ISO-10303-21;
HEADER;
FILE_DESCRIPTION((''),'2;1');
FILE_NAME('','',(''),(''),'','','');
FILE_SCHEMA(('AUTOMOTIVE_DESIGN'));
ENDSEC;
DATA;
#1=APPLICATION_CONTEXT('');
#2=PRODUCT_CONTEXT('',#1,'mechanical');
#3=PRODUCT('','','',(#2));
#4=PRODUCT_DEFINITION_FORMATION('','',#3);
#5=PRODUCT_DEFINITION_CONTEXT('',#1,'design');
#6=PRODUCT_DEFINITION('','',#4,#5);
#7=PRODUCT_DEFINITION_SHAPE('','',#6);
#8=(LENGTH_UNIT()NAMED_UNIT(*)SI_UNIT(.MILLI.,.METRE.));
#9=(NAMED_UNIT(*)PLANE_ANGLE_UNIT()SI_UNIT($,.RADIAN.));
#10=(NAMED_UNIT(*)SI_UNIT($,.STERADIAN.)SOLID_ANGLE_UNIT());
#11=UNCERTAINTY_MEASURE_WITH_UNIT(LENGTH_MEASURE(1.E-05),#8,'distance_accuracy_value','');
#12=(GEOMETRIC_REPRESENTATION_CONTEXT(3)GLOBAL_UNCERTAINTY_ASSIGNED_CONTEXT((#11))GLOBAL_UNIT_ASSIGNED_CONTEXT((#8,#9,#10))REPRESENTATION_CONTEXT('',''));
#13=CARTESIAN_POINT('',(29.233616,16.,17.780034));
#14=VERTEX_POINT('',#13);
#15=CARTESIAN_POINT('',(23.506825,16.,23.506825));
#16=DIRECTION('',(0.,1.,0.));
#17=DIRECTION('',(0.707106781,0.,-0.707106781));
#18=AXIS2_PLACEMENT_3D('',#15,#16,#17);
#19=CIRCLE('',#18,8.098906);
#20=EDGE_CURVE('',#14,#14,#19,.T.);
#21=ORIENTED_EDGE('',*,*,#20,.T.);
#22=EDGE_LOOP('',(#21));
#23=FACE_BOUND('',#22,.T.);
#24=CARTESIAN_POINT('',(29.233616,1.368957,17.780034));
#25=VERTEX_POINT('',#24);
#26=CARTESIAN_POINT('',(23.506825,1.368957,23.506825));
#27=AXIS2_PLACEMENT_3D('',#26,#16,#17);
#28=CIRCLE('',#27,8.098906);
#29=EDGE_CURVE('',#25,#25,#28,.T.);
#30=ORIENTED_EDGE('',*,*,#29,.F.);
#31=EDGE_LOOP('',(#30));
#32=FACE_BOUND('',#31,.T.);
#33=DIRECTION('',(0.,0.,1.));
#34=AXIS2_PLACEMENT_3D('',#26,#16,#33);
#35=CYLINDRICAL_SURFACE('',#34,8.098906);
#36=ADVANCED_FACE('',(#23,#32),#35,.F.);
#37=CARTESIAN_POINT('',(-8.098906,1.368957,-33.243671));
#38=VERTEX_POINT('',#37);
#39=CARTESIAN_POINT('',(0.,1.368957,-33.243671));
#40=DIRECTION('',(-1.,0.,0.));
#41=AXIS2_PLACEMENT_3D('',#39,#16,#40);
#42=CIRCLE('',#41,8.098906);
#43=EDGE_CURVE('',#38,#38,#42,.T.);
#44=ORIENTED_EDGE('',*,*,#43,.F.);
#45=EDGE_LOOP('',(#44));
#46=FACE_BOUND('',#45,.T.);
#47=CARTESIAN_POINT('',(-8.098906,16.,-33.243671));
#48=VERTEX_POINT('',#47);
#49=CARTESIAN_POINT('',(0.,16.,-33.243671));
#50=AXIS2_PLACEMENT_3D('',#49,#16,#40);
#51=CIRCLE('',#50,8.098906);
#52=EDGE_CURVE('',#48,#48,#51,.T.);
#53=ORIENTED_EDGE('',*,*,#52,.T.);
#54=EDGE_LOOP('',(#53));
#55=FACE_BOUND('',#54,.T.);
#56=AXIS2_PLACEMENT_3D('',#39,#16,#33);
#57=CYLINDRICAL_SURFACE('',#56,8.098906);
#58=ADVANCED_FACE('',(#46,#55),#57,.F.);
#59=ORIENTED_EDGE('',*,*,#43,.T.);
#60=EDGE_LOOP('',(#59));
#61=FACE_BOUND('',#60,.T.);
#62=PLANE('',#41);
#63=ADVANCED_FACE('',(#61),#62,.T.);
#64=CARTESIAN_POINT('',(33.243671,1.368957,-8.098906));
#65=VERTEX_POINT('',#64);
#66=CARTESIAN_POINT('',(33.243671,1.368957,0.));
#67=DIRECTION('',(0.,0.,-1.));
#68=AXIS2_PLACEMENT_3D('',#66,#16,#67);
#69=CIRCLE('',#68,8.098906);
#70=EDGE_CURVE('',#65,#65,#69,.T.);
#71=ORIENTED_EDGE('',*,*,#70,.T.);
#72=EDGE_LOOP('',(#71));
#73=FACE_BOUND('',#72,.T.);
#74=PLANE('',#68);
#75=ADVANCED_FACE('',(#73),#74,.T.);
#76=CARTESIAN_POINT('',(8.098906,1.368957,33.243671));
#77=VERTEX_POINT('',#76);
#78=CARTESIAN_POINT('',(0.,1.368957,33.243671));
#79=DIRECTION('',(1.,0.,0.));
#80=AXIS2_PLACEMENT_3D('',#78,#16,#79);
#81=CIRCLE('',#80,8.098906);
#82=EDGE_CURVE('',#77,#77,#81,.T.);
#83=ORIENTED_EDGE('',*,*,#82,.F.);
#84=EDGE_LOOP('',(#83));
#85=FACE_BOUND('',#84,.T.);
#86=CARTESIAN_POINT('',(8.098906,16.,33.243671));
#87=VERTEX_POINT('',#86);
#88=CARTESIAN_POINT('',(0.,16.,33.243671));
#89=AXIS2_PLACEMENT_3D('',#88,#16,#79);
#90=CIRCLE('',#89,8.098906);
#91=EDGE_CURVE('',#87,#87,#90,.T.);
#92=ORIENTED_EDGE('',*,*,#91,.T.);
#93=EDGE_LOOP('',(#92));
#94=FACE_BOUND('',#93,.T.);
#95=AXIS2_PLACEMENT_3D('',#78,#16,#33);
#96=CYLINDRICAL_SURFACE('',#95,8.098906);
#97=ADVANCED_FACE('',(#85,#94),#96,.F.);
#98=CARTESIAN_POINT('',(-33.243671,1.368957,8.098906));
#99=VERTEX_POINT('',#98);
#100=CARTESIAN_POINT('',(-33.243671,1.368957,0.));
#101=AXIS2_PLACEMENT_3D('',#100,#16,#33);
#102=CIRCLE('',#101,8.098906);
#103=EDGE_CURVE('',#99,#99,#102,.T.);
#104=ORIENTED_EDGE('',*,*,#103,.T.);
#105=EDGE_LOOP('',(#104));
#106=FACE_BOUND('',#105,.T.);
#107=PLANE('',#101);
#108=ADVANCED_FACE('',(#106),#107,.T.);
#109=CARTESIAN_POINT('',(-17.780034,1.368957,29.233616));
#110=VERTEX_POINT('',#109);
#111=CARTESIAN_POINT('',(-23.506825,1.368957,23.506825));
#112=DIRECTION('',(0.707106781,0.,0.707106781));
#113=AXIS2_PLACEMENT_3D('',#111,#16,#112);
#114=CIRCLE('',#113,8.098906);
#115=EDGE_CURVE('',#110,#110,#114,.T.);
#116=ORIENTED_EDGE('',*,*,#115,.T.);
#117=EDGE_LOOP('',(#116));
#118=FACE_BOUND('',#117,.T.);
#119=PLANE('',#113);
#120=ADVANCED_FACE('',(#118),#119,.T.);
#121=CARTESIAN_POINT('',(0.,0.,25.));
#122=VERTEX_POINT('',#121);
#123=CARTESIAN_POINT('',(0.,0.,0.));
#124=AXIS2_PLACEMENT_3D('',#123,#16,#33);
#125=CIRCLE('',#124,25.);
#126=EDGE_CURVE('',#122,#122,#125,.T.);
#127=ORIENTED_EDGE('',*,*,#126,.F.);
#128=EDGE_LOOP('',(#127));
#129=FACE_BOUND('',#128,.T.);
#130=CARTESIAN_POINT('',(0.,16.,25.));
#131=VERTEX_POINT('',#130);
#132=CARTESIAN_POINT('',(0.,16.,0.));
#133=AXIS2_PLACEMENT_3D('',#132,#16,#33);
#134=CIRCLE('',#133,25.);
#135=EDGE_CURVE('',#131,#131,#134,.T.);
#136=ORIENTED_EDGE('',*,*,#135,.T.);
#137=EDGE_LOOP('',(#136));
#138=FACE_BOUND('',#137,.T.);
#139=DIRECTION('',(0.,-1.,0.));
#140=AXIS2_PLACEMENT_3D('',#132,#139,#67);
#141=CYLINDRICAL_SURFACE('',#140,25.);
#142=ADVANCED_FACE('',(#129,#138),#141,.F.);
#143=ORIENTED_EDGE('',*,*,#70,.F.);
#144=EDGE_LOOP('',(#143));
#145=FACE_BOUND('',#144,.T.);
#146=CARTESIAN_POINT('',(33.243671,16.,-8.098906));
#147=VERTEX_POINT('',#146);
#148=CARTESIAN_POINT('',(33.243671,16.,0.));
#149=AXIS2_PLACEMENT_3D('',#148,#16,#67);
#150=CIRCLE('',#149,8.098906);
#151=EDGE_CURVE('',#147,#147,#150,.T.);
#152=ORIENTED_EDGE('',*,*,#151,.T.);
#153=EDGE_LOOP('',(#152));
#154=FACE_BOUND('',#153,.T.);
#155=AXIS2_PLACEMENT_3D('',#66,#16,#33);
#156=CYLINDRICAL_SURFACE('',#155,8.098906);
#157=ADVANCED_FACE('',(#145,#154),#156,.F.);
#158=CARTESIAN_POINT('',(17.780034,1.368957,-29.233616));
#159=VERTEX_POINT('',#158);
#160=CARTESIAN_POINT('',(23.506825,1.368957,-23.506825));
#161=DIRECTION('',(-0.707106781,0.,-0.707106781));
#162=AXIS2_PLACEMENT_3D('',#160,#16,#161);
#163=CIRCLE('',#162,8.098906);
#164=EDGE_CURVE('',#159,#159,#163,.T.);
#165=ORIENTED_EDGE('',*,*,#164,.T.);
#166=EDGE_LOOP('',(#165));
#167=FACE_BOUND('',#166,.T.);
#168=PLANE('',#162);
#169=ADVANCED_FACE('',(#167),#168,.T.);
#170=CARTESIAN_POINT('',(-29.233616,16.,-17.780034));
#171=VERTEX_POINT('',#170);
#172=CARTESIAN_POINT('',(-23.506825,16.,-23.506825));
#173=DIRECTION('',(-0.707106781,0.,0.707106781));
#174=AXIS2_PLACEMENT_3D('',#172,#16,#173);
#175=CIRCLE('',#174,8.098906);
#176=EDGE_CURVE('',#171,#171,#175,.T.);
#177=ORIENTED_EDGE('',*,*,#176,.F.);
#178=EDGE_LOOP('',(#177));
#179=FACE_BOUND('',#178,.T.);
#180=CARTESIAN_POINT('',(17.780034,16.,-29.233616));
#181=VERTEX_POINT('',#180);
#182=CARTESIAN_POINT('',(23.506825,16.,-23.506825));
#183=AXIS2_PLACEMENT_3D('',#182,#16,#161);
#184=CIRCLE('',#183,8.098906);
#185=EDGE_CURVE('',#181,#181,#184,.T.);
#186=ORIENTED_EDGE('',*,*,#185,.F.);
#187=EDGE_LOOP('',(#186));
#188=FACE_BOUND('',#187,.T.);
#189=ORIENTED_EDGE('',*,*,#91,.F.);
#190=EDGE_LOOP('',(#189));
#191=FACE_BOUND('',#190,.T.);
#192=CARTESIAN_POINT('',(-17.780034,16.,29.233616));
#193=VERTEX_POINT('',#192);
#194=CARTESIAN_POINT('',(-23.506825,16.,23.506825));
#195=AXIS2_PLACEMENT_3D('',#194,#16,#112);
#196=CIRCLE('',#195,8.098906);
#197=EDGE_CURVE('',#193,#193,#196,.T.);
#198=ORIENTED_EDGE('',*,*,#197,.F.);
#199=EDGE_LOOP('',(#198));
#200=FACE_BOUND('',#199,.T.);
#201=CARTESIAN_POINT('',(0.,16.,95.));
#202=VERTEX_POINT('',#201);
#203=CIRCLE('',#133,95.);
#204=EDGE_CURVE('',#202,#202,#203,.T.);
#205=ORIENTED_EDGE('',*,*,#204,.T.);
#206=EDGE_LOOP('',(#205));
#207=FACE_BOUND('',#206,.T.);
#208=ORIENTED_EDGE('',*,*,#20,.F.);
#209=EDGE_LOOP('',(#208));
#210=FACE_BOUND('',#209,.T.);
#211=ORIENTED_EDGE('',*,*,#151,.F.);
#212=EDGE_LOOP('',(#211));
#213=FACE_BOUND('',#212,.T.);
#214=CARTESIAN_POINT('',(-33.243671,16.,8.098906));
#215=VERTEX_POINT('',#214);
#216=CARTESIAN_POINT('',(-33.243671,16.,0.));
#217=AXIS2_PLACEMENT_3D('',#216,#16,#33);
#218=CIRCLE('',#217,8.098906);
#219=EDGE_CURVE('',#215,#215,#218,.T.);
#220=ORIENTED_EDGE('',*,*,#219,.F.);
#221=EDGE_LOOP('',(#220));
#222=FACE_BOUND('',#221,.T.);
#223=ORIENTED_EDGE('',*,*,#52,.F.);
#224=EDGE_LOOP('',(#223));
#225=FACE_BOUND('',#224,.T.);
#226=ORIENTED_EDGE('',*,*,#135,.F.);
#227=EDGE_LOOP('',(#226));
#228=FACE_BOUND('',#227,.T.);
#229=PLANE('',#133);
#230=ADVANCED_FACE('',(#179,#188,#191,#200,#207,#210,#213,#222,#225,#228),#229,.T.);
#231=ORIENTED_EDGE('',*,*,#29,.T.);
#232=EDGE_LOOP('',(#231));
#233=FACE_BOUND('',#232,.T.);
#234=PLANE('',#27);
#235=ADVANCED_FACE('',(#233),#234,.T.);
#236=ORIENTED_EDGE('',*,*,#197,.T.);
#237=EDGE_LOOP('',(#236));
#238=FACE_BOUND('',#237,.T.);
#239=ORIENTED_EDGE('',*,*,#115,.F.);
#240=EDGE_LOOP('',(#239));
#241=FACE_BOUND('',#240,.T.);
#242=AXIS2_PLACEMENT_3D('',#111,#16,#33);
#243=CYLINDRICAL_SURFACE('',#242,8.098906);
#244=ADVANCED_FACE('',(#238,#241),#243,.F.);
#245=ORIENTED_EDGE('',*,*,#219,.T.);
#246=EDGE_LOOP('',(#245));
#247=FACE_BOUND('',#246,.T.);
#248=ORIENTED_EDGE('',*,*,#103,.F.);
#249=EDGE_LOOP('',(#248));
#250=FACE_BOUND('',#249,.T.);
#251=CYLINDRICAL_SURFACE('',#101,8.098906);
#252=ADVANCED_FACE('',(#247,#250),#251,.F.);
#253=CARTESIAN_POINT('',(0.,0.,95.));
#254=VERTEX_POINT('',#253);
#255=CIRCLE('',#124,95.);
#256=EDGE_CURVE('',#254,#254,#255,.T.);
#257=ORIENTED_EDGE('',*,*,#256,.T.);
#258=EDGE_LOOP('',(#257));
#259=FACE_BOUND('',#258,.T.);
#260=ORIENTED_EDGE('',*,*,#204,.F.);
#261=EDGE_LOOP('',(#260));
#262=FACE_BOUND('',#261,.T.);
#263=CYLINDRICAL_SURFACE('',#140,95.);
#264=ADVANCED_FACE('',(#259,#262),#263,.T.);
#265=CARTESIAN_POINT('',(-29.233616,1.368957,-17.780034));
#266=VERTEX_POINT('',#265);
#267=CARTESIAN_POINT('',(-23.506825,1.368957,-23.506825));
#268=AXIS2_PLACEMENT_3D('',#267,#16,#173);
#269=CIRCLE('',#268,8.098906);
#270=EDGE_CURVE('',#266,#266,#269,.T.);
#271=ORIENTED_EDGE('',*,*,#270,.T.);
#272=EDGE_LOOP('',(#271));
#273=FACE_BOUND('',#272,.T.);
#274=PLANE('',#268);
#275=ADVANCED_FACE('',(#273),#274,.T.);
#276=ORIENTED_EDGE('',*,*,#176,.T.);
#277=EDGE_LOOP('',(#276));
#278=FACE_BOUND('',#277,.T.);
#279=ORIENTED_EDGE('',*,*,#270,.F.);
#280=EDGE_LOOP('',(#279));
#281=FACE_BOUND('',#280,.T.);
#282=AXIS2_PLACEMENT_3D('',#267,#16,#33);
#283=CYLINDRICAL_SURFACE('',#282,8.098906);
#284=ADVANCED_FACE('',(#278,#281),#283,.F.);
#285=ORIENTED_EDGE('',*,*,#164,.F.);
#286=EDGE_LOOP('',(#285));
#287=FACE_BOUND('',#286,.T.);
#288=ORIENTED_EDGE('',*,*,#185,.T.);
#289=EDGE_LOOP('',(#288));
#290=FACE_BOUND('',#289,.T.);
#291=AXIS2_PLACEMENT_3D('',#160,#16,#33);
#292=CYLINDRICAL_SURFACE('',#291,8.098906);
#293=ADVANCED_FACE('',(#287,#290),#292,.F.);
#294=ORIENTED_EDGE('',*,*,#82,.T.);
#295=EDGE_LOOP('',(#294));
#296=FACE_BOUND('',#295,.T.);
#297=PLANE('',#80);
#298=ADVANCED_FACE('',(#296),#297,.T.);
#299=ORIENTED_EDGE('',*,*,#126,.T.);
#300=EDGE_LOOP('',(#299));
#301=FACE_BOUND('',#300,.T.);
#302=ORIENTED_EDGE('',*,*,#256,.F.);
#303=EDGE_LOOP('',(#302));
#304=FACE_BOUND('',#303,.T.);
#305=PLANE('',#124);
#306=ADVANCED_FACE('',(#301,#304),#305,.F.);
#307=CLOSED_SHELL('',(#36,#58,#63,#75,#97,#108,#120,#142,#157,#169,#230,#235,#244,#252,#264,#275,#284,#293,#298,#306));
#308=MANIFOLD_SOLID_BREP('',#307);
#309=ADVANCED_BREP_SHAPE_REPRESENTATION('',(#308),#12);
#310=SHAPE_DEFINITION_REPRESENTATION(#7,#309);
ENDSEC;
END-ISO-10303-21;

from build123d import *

# Parameters (mm, degrees)
SKETCH1_R           = 95
BOSS_EXTRUDE1_DEPTH = 16
SKETCH2_R           = 25
CUT_EXTRUDE1_DEPTH  = 136.299667405
SKETCH3_R           = 8.098905889
CUT_EXTRUDE2_DEPTH  = 14.63104318
CIRPATTERN1_COUNT   = 8


with BuildPart() as part:
    # Sketch1 → Boss-Extrude1 (new body)
    with BuildSketch(Plane(origin=(0, 0, 0), x_dir=(1, 0, 0), z_dir=(0, 1, 0))):
        Circle(SKETCH1_R)
    extrude(amount=BOSS_EXTRUDE1_DEPTH)

    # Sketch2 → Cut-Extrude1 (cut, through all)
    with BuildSketch(Plane(origin=(0, 0, 0), x_dir=(1, 0, 0), z_dir=(0, 1, 0))):
        Circle(SKETCH2_R)
    extrude(amount=CUT_EXTRUDE1_DEPTH, mode=Mode.SUBTRACT)

    # Sketch3 → Cut-Extrude2 (cut)
    with BuildSketch(Plane(origin=(0, 16, 0), x_dir=(1, 0, 0), z_dir=(0, 1, 0))):
        with Locations((-33.243670808, 0)):
            Circle(SKETCH3_R)
    cut_extrude2 = extrude(amount=-CUT_EXTRUDE2_DEPTH, mode=Mode.SUBTRACT)

    # CirPattern1: Cut-Extrude2 ×8 about axis
    cirpattern1_axis = Axis((0, 0, 0), (0, 1, 0))
    for i in range(1, CIRPATTERN1_COUNT):
        add(cut_extrude2.rotate(cirpattern1_axis, i * 360 / CIRPATTERN1_COUNT), mode=Mode.SUBTRACT)


solid = part.part
